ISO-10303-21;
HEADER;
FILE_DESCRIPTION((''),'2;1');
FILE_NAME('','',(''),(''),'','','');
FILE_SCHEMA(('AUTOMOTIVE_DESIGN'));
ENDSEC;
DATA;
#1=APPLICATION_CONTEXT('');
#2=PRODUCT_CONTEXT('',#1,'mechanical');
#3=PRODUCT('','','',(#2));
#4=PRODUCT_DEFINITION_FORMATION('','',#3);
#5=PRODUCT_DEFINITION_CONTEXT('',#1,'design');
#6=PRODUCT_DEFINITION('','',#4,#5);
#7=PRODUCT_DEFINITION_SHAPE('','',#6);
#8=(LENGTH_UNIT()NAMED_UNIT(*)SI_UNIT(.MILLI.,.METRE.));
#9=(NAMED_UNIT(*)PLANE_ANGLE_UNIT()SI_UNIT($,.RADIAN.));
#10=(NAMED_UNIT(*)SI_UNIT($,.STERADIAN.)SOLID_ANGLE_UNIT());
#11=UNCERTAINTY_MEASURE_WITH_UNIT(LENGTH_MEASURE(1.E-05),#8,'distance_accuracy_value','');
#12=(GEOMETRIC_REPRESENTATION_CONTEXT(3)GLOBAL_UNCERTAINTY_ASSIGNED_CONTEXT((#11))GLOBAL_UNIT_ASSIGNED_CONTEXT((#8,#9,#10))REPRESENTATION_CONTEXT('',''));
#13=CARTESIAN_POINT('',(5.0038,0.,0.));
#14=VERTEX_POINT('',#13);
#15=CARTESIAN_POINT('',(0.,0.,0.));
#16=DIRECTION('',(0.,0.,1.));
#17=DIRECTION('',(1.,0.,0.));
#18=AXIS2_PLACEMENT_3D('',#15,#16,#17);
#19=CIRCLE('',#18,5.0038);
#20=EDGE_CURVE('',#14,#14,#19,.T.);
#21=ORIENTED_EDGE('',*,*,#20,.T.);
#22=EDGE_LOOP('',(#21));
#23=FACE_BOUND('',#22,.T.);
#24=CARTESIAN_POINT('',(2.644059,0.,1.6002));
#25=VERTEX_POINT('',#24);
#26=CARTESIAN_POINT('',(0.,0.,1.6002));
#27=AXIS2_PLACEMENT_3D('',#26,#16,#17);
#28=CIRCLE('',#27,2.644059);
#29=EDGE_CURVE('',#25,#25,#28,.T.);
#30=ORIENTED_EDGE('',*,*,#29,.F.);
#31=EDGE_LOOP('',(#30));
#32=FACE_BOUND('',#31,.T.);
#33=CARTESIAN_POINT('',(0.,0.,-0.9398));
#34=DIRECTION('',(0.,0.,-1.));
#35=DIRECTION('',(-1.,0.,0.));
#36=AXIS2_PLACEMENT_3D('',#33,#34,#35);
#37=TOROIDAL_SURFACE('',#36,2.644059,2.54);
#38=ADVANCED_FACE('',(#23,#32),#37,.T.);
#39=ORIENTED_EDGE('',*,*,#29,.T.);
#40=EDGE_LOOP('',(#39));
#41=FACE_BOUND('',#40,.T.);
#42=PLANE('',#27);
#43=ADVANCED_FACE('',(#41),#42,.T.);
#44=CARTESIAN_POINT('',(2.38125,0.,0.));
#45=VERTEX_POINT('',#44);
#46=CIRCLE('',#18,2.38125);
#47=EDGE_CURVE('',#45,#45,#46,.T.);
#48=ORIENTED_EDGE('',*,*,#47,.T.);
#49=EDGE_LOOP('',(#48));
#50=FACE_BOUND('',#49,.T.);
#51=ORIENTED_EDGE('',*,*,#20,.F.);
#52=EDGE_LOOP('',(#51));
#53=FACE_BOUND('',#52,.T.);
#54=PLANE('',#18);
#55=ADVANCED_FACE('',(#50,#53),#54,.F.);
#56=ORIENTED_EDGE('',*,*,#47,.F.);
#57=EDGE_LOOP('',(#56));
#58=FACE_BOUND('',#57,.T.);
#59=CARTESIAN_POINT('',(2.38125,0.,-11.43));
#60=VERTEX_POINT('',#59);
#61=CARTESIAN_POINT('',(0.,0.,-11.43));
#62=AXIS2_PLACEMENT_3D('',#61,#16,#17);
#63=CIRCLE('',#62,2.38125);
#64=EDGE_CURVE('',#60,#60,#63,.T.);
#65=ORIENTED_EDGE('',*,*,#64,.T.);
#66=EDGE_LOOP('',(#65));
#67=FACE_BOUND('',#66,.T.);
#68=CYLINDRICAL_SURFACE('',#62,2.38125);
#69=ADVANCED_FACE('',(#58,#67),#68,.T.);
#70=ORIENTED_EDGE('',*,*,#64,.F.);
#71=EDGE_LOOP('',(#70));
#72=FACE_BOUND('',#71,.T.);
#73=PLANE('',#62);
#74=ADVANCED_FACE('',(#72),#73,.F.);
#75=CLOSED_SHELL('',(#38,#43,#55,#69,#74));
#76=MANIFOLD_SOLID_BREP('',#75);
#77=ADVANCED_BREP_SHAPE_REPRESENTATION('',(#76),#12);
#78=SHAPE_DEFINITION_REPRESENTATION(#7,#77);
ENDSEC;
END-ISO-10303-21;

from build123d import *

# Parameters (mm, degrees)
SKETCH1_R           = 5.0038
BOSS_EXTRUDE1_DEPTH = 1.6002
SKETCH2_R           = 2.38125
BOSS_EXTRUDE2_DEPTH = 11.43
FILLET1_R           = 2.54


with BuildPart() as part:
    # Sketch1 → Boss-Extrude1 (new body)
    with BuildSketch(Plane.XY):
        Circle(SKETCH1_R)
    extrude(amount=BOSS_EXTRUDE1_DEPTH)

    # Sketch2 → Boss-Extrude2 (add)
    with BuildSketch(Plane.XY):
        Circle(SKETCH2_R)
    extrude(amount=-BOSS_EXTRUDE2_DEPTH)

    # Fillet1
    # the kernel refuses this fillet: 2.54 mm, written as the material it takes off along each edge
    with BuildSketch(Plane(origin=(0, 0, 1.6002), x_dir=(1, 0, 0), z_dir=(0, -1, 0))) as fillet1_piece_1:
        with BuildLine():
            CenterArc((2.644059345, -2.54), FILLET1_R, 21.715617283, 68.284382717)
            Line((2.644059345, 0), (2.644059345, 0.0508))
            Line((2.644059345, 0.0508), (5.0038, 0.0508))
            Line((5.0038, 0.0508), (5.0546, 0))
            ThreePointArc((5.0546, 0), (5.0546, -0.8001), (5.050994813, -1.581404))
            Line((5.050994813, -1.581404), (5.0038, -1.6002))
        make_face()
    revolve(axis=Axis((0, 0, 1.6002), (0, 0, 1)), mode=Mode.SUBTRACT)


solid = part.part
